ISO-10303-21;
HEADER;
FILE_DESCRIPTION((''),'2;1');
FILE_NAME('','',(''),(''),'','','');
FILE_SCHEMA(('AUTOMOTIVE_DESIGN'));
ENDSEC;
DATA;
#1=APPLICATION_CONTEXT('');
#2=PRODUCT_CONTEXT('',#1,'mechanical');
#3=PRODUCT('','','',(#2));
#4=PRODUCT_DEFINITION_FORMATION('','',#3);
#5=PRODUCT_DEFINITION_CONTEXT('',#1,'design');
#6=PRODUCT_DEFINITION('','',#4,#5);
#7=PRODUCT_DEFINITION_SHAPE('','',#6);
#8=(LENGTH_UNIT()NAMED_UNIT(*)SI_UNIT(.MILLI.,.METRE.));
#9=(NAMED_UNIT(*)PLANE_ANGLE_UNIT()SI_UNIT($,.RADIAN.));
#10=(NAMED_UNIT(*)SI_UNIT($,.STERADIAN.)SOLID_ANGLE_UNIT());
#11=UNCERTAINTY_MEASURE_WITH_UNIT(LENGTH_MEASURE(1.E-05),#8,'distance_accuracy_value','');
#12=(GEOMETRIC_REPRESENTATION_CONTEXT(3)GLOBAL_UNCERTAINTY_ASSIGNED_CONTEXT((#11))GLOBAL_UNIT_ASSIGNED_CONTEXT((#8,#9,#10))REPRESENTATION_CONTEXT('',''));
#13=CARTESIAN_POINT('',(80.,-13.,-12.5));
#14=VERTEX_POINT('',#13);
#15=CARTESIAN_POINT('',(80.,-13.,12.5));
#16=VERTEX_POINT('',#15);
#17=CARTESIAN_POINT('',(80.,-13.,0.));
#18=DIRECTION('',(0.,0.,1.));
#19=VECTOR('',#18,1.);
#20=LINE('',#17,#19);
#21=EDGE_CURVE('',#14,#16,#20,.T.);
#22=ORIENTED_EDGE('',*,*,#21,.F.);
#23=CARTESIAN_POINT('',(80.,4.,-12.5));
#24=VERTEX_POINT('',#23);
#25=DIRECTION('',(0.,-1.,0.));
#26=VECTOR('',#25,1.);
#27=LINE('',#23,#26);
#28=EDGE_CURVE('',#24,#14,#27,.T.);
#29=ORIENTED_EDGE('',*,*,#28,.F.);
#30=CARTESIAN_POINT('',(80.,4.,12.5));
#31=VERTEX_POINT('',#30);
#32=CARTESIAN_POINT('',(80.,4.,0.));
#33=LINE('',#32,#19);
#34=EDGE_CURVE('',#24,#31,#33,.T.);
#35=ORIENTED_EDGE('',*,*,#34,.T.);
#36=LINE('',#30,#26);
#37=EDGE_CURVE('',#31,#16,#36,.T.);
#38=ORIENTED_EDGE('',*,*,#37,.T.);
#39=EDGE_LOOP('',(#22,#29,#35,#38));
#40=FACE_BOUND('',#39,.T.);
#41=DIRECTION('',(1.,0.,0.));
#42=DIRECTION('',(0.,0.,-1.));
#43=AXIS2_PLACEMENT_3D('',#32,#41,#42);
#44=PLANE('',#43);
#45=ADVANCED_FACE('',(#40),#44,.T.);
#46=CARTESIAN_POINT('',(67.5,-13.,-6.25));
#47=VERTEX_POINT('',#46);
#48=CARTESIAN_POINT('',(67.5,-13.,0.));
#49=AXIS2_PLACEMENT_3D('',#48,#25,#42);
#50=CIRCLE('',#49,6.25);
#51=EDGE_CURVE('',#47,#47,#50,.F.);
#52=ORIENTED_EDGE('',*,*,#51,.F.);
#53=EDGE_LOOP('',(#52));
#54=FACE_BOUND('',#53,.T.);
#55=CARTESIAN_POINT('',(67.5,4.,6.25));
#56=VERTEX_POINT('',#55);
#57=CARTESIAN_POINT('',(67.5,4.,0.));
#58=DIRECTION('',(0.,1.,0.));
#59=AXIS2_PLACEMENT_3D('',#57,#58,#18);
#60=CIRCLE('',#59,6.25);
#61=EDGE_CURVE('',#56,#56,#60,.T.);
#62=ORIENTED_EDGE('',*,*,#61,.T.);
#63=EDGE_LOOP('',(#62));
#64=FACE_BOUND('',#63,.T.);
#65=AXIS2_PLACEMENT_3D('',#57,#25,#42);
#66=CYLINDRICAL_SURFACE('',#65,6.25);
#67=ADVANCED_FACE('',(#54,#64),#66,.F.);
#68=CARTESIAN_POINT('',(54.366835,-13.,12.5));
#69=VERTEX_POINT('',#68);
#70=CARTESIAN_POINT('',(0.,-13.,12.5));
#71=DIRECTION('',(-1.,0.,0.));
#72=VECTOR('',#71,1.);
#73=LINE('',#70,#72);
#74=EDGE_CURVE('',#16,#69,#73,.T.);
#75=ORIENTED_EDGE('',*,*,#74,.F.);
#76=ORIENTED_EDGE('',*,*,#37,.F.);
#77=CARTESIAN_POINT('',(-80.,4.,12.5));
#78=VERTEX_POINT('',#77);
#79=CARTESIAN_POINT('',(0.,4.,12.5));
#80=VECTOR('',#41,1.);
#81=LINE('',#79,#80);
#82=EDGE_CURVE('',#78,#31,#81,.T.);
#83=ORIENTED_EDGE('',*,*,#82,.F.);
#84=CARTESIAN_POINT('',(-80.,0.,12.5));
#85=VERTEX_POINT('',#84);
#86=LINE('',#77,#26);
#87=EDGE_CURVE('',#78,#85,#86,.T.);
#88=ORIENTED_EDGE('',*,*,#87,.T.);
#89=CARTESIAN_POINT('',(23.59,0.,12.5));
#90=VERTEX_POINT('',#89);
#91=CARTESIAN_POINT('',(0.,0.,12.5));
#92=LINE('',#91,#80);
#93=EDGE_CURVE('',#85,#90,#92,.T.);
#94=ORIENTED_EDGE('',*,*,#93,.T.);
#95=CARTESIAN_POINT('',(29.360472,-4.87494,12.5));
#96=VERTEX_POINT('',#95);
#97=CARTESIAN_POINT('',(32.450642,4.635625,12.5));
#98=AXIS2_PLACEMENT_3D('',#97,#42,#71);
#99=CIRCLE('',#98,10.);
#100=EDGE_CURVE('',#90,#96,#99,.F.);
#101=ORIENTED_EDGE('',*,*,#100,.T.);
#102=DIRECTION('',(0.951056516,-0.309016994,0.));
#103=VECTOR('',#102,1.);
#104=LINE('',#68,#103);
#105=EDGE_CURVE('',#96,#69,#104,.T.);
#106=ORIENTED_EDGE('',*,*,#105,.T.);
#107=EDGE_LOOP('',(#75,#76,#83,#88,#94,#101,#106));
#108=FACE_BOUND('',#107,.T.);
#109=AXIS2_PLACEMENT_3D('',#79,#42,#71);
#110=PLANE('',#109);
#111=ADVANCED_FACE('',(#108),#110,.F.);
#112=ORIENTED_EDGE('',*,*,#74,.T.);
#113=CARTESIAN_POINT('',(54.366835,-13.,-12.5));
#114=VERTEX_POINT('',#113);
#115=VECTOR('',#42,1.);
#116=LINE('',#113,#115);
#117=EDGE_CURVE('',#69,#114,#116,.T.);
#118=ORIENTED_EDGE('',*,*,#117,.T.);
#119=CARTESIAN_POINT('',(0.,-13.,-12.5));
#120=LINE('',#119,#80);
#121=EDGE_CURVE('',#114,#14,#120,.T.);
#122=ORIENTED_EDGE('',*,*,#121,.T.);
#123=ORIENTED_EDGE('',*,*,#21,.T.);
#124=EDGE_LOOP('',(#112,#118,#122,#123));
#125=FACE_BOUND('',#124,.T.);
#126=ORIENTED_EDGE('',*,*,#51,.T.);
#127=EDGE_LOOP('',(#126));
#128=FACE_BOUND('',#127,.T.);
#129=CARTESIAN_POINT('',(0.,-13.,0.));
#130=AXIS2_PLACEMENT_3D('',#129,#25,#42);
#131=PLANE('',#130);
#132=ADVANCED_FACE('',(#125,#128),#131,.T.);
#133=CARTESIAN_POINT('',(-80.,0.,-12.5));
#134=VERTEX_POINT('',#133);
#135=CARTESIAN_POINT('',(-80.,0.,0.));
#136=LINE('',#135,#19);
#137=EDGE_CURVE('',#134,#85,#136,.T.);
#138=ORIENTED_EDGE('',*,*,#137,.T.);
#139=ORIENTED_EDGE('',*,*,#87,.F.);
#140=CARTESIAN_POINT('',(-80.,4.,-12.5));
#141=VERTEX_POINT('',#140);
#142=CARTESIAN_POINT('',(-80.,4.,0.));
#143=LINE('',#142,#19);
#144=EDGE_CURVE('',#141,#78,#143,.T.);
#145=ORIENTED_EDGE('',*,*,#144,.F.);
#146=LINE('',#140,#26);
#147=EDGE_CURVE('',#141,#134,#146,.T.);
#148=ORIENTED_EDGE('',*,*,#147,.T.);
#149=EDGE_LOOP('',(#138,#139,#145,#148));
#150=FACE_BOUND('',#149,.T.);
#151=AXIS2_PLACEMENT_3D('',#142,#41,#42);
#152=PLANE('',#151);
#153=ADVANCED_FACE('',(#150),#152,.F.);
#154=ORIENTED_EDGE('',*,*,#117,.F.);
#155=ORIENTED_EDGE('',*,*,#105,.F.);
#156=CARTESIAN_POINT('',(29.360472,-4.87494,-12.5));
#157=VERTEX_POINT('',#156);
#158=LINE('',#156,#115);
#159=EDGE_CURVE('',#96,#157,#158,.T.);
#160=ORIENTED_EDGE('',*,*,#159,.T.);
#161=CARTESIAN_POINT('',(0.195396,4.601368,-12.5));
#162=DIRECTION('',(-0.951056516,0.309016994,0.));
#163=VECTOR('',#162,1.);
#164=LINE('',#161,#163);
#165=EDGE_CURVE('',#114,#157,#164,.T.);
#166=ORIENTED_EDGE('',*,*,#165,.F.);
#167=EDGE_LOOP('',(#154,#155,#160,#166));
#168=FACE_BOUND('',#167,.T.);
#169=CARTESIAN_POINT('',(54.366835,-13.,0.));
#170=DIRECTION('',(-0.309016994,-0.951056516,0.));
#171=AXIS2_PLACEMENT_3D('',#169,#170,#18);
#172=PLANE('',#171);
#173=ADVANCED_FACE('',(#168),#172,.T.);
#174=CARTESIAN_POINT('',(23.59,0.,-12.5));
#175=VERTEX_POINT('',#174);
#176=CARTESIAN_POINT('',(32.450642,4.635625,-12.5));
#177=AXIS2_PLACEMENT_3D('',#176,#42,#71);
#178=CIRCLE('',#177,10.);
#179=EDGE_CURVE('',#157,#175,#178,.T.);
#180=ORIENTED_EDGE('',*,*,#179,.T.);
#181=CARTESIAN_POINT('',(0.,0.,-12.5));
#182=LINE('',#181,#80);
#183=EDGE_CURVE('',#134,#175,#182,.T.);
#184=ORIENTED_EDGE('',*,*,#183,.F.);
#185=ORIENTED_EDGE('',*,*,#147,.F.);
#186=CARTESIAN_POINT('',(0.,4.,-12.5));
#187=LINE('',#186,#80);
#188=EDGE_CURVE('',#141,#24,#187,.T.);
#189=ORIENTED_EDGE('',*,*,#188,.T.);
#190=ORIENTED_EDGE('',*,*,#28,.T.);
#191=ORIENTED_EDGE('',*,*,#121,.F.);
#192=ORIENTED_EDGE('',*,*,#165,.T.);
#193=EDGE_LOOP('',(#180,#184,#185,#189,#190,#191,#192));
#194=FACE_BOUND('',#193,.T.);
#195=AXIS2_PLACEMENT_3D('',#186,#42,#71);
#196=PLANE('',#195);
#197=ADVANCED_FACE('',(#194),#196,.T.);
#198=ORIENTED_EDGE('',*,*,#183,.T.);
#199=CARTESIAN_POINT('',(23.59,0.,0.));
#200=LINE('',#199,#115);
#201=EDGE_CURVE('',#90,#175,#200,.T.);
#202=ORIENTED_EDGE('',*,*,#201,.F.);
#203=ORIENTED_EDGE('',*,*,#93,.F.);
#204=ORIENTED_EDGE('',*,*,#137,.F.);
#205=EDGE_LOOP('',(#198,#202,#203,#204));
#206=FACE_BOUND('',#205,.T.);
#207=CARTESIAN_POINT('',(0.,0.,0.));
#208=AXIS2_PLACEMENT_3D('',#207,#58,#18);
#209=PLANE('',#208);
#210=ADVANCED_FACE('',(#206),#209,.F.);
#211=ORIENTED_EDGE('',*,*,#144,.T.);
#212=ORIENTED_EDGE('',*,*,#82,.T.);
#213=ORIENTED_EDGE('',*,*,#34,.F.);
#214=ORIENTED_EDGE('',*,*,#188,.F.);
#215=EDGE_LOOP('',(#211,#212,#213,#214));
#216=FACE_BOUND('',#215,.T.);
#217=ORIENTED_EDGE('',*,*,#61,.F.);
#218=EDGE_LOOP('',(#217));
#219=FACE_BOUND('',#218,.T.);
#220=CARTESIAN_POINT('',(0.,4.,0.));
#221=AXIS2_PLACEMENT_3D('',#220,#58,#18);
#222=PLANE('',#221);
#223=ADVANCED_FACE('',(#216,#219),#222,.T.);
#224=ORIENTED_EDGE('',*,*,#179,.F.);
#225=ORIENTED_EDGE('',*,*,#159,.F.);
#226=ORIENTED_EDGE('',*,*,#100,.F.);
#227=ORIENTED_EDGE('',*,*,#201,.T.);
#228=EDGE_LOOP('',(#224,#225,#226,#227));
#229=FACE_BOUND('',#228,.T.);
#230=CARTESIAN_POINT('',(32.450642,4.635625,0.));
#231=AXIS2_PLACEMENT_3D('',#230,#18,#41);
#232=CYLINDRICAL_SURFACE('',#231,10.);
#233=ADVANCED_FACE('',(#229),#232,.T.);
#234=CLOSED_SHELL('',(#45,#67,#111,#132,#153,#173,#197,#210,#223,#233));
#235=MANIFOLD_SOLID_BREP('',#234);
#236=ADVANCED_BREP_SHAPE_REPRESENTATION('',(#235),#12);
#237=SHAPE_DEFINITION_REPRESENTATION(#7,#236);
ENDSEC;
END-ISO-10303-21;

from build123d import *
from build123d.topology import SkipClean

# Parameters (mm, degrees)
SKETCH1_W           = 160
SKETCH1_H           = 25
SKETCH1_R           = 6.25
BOSS_EXTRUDE1_DEPTH = 4
BOSS_EXTRUDE2_START = 13
SKETCH2_W           = 56.41
SKETCH2_H           = 25
SKETCH2_R           = 6.25
BOSS_EXTRUDE2_DEPTH = 13
CHAMFER1_SIZE       = 10
CHAMFER1_SIZE2      = 30.776835372
FILLET1_R           = 10


with BuildPart() as part:
    # Sketch1 → Boss-Extrude1 (new body)
    with BuildSketch(Plane(origin=(0, 0, 0), x_dir=(1, 0, 0), z_dir=(0, 1, 0))):
        Rectangle(SKETCH1_W, SKETCH1_H)
        with Locations(Location((67.5, 0, 0), (0, 0, 270))):
            Circle(SKETCH1_R, mode=Mode.SUBTRACT)
    extrude(amount=BOSS_EXTRUDE1_DEPTH)

    # Sketch2 → Boss-Extrude2 (add)
    with SkipClean():  # the faces are left unmerged after this step: merging them gives an invalid solid
        with BuildSketch(Plane.XZ.offset(BOSS_EXTRUDE2_START)):
            with Locations((51.795, 0)):
                Rectangle(SKETCH2_W, SKETCH2_H)
            with Locations((67.5, 0)):
                Circle(SKETCH2_R, mode=Mode.SUBTRACT)
        extrude(amount=-BOSS_EXTRUDE2_DEPTH)

    # Chamfer1
    chamfer1_edges = [part.edges().sort_by_distance(p)[0] for p in [
        (23.59, -13, 0),
    ]]
    chamfer1_side = [part.faces().sort_by_distance(p)[0] for p in [
        (23.59, -6.5, 0),
    ]]
    chamfer(chamfer1_edges, length=CHAMFER1_SIZE, length2=CHAMFER1_SIZE2, reference=chamfer1_side[0])

    # Fillet1
    # the kernel refuses this fillet: 10 mm, written as the material it takes off along each edge
    with BuildSketch(Plane(origin=(23.59, -3, 27.668583986), x_dir=(0.9510565162951544, -0.3090169943749446, 0), z_dir=(0, 0, -1))) as fillet1_piece_1:
        with BuildLine():
            CenterArc((6.067433594, -10), FILLET1_R, 90, 44.38277042)
            Line((-0.927050983, -2.853169549), (-1.066940675, -2.71023294))
            ThreePointArc((-1.066940675, -2.71023294), (-0.653736795, -1.364781376), (-0.190211303, 0.061803399))
            Line((-0.190211303, 0.061803399), (0, 0.2))
            Line((0, 0.2), (6.067433594, 0.2))
            Line((6.067433594, 0.2), (6.067433594, 0))
        make_face()
    extrude(amount=55.337167971, mode=Mode.SUBTRACT)


solid = part.part
